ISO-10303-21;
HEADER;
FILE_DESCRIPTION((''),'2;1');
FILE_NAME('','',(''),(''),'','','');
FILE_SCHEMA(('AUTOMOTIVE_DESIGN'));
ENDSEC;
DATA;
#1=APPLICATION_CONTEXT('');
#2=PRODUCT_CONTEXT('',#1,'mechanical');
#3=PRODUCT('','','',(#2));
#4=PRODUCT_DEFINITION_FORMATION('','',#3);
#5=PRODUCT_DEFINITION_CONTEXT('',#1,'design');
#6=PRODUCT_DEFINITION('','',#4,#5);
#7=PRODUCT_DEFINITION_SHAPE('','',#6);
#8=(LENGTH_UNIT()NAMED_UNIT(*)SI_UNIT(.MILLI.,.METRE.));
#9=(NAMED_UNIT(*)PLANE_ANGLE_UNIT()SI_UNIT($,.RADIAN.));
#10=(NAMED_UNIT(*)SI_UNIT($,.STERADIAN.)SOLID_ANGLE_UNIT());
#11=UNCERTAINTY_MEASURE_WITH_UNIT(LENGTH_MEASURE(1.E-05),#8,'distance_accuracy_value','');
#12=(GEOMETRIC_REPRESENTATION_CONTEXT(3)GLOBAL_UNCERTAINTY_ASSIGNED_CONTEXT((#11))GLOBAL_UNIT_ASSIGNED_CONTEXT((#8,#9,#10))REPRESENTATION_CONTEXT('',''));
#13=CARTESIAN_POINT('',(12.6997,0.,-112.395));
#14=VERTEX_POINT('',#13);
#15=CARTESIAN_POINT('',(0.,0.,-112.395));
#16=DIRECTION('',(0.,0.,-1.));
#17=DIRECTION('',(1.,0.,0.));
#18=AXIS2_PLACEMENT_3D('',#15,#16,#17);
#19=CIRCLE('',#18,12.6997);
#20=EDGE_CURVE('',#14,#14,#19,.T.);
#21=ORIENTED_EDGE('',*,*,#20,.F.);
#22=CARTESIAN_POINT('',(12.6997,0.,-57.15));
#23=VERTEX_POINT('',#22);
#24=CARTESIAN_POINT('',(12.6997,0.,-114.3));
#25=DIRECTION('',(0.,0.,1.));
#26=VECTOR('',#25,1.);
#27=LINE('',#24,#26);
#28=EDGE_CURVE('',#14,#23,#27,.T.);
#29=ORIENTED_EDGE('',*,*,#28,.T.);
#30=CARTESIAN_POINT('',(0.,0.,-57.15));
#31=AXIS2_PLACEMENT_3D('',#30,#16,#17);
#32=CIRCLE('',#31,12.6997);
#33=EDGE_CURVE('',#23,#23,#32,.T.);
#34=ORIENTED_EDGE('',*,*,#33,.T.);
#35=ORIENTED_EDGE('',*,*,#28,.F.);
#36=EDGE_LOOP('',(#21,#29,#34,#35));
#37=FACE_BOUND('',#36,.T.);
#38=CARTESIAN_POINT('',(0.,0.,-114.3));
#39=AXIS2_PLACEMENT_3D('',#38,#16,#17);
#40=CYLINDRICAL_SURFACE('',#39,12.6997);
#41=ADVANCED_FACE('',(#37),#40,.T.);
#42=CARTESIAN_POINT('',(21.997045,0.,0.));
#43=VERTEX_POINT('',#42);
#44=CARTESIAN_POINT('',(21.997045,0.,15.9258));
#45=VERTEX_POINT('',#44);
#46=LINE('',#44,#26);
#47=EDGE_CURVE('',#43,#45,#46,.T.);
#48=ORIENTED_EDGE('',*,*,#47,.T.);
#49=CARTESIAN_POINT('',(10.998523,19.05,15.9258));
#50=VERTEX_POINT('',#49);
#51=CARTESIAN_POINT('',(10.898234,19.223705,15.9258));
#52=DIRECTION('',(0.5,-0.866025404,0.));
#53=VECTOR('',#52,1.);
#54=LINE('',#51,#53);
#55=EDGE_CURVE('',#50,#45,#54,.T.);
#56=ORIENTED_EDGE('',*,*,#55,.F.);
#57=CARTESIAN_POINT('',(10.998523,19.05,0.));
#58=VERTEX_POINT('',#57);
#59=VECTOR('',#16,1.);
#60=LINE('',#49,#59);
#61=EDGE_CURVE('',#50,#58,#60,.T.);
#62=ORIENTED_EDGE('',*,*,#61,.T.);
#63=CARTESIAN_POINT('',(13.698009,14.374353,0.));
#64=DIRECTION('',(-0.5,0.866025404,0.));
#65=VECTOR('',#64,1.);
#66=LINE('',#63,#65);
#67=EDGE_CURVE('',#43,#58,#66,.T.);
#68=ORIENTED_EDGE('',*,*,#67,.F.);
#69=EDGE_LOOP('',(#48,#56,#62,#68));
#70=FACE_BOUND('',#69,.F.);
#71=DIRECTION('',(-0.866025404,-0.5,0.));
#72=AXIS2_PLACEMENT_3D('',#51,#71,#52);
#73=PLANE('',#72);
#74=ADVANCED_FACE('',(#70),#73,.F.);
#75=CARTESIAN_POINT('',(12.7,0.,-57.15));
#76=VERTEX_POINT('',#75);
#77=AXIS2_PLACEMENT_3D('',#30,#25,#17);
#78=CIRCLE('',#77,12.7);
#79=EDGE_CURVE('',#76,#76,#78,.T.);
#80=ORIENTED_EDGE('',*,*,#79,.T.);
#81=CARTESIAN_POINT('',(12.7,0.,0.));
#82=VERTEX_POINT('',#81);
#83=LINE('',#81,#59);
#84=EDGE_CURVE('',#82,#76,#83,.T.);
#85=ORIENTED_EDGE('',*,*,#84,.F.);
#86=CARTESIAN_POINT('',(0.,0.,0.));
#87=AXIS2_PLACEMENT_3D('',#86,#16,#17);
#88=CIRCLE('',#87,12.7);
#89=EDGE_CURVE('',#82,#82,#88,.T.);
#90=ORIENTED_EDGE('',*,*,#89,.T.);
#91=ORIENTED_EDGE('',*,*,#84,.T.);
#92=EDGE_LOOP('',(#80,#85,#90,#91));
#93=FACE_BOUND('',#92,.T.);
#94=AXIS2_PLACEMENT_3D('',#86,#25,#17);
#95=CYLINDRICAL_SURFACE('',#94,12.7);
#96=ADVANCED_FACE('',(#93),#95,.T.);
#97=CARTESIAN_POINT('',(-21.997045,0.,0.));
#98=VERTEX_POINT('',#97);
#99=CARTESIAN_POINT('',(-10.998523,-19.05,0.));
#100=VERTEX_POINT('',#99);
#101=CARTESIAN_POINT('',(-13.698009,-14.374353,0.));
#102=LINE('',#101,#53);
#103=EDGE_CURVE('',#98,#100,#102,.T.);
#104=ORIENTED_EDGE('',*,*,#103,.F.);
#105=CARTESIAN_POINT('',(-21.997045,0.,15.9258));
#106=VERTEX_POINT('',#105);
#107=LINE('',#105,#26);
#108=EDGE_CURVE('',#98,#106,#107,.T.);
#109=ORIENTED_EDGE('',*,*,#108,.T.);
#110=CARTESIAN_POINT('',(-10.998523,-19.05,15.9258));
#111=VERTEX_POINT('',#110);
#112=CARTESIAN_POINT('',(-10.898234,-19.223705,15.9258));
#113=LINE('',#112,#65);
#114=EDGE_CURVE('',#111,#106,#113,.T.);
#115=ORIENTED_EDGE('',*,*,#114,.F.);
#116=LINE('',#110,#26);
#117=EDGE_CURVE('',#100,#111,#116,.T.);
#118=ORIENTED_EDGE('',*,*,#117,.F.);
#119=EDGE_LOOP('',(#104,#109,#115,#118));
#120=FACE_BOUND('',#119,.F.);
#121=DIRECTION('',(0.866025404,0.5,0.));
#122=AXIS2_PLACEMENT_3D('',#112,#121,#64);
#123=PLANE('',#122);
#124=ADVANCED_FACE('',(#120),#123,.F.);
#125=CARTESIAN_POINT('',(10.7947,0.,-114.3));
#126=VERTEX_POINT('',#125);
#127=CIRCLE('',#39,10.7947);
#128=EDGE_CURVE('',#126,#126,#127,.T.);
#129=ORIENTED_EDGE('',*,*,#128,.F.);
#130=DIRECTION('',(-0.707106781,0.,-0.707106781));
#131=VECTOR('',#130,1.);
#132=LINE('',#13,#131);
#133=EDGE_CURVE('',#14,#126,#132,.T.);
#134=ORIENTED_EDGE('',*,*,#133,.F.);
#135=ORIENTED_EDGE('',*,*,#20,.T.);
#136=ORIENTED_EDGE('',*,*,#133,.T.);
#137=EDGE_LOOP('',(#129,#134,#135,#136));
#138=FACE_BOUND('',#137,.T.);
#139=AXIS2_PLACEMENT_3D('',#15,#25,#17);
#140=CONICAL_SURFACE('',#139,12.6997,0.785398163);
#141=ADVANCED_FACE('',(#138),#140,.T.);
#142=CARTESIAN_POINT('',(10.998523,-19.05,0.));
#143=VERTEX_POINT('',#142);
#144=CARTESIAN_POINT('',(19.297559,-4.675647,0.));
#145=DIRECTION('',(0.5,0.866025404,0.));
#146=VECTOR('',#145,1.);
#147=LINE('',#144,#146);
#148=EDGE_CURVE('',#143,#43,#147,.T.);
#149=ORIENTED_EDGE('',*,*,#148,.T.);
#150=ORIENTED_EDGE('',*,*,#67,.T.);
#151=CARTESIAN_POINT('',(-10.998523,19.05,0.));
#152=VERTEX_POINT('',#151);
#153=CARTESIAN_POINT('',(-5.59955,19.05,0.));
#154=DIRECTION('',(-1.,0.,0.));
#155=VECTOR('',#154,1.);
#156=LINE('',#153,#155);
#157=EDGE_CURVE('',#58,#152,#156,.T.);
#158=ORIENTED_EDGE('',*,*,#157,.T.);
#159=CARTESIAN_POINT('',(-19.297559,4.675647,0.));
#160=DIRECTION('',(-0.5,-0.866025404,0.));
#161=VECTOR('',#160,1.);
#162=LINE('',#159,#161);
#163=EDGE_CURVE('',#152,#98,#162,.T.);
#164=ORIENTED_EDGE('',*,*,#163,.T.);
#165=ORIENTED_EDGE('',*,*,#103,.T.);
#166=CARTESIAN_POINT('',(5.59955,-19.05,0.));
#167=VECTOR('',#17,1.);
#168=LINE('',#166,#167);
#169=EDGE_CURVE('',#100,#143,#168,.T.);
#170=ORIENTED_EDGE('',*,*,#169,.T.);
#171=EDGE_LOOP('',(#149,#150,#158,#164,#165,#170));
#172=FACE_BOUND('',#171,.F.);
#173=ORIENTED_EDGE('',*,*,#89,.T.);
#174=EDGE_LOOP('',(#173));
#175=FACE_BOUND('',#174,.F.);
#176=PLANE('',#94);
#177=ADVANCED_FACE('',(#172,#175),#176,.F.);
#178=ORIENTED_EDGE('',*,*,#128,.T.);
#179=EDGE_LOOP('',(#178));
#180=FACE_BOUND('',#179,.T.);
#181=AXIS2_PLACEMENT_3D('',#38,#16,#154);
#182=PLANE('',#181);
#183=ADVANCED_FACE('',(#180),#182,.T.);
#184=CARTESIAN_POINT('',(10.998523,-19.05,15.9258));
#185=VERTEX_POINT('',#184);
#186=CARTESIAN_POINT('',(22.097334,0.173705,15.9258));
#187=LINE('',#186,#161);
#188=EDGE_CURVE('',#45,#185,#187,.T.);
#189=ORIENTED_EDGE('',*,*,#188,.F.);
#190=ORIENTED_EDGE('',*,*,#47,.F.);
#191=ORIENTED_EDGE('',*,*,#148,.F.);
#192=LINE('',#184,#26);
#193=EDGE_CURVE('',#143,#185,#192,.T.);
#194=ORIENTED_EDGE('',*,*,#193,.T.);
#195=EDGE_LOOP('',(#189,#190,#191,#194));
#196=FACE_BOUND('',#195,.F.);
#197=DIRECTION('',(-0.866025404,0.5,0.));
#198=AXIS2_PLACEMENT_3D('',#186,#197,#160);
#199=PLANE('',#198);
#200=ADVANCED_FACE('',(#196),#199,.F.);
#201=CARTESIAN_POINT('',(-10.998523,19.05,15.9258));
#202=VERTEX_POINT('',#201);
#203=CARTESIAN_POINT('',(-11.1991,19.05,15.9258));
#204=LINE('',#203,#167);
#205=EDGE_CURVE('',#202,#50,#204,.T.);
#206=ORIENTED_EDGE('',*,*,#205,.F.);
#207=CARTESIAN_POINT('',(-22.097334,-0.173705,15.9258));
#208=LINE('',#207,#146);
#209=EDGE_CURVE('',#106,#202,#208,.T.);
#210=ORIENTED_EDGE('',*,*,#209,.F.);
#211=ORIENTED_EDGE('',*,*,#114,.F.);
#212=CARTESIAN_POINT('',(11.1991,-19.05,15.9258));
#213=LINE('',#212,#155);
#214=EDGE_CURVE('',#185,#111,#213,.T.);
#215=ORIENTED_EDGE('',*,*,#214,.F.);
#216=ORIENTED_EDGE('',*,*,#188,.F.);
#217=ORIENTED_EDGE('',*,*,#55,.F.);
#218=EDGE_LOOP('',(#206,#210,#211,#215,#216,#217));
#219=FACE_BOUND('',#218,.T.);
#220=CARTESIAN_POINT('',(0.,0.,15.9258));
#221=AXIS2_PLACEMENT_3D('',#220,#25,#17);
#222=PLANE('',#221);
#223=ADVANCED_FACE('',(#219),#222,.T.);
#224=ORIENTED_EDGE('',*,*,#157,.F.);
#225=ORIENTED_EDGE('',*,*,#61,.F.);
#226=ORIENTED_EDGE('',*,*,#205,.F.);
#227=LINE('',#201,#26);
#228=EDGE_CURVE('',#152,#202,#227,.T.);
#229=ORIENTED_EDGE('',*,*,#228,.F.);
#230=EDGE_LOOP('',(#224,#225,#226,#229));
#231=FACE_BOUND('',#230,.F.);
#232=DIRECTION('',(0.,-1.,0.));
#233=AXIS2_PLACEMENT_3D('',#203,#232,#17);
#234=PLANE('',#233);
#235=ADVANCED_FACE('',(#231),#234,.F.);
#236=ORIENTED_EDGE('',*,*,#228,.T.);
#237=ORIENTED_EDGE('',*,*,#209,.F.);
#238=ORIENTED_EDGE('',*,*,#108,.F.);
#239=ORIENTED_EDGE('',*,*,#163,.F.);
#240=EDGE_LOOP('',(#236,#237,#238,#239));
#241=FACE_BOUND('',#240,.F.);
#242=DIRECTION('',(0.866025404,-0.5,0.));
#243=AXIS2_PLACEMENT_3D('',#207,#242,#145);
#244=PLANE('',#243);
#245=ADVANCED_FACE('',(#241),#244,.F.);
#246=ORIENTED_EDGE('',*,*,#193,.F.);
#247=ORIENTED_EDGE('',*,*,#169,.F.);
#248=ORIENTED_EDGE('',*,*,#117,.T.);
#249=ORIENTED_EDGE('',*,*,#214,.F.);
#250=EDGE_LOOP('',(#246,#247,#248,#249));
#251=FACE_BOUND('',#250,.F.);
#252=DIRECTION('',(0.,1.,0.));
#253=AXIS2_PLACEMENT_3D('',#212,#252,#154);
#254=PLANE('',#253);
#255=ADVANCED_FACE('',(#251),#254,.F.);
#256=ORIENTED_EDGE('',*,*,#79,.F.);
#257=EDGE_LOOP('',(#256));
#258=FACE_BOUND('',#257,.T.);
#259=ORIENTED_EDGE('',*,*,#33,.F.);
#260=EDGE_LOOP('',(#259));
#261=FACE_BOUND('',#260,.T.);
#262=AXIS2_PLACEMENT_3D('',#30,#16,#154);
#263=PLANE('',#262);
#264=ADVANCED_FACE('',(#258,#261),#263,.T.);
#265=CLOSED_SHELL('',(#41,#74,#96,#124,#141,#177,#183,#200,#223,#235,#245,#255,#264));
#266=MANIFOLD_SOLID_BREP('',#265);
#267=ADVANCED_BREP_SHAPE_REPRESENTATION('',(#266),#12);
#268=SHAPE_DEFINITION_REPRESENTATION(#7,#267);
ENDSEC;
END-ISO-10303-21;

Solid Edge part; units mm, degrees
sketch "Sketch1" plane through (0, 0, 0) normal (0, 0, 1) x (1, 0, 0)
  circle A0 centre (0, 0) radius 22.098
  dimension "D1" = 44.196
extrude "Protrusion1" add sketch "Sketch1" along normal blind 15.9258
sketch "Sketch2" plane through (0, 0, 0) normal (0, 0, -1) x (1, 0, 0)
  circle A0 centre (0, 0) radius 12.7
extrude "Protrusion2" add sketch "Sketch2" along normal blind 114.3
sketch "Sketch3" plane through (0, 0, -114.3) normal (0, 0, -1) x (1, 0, 0)
  circle A0 centre (0, 0) radius 12.6997
extrude "Cutout1" cut sketch "Sketch3" against normal blind 57.15 flip side to cut
chamfer "Chamfer_1" distance 1.905 angle 45 1 edges at (-12.6997, 0, -114.3)
sketch "Sketch4" plane through (0, 0, 15.9258) normal (0, 0, 1) x (1, 0, 0)
  line L0 (-11.1991, 19.05) -> (11.1991, 19.05)
  dimension "D1" = 38.1
extrude "Cutout2" cut sketch "Sketch4" against normal up to next material side at (0, 19.1, 15.9258)
pattern_circular "Pattern1" count 6 over 360 about axis through (0, 0, 15.9258) along (0, 0, 1) of "Cutout2"
properties part number "122991"
